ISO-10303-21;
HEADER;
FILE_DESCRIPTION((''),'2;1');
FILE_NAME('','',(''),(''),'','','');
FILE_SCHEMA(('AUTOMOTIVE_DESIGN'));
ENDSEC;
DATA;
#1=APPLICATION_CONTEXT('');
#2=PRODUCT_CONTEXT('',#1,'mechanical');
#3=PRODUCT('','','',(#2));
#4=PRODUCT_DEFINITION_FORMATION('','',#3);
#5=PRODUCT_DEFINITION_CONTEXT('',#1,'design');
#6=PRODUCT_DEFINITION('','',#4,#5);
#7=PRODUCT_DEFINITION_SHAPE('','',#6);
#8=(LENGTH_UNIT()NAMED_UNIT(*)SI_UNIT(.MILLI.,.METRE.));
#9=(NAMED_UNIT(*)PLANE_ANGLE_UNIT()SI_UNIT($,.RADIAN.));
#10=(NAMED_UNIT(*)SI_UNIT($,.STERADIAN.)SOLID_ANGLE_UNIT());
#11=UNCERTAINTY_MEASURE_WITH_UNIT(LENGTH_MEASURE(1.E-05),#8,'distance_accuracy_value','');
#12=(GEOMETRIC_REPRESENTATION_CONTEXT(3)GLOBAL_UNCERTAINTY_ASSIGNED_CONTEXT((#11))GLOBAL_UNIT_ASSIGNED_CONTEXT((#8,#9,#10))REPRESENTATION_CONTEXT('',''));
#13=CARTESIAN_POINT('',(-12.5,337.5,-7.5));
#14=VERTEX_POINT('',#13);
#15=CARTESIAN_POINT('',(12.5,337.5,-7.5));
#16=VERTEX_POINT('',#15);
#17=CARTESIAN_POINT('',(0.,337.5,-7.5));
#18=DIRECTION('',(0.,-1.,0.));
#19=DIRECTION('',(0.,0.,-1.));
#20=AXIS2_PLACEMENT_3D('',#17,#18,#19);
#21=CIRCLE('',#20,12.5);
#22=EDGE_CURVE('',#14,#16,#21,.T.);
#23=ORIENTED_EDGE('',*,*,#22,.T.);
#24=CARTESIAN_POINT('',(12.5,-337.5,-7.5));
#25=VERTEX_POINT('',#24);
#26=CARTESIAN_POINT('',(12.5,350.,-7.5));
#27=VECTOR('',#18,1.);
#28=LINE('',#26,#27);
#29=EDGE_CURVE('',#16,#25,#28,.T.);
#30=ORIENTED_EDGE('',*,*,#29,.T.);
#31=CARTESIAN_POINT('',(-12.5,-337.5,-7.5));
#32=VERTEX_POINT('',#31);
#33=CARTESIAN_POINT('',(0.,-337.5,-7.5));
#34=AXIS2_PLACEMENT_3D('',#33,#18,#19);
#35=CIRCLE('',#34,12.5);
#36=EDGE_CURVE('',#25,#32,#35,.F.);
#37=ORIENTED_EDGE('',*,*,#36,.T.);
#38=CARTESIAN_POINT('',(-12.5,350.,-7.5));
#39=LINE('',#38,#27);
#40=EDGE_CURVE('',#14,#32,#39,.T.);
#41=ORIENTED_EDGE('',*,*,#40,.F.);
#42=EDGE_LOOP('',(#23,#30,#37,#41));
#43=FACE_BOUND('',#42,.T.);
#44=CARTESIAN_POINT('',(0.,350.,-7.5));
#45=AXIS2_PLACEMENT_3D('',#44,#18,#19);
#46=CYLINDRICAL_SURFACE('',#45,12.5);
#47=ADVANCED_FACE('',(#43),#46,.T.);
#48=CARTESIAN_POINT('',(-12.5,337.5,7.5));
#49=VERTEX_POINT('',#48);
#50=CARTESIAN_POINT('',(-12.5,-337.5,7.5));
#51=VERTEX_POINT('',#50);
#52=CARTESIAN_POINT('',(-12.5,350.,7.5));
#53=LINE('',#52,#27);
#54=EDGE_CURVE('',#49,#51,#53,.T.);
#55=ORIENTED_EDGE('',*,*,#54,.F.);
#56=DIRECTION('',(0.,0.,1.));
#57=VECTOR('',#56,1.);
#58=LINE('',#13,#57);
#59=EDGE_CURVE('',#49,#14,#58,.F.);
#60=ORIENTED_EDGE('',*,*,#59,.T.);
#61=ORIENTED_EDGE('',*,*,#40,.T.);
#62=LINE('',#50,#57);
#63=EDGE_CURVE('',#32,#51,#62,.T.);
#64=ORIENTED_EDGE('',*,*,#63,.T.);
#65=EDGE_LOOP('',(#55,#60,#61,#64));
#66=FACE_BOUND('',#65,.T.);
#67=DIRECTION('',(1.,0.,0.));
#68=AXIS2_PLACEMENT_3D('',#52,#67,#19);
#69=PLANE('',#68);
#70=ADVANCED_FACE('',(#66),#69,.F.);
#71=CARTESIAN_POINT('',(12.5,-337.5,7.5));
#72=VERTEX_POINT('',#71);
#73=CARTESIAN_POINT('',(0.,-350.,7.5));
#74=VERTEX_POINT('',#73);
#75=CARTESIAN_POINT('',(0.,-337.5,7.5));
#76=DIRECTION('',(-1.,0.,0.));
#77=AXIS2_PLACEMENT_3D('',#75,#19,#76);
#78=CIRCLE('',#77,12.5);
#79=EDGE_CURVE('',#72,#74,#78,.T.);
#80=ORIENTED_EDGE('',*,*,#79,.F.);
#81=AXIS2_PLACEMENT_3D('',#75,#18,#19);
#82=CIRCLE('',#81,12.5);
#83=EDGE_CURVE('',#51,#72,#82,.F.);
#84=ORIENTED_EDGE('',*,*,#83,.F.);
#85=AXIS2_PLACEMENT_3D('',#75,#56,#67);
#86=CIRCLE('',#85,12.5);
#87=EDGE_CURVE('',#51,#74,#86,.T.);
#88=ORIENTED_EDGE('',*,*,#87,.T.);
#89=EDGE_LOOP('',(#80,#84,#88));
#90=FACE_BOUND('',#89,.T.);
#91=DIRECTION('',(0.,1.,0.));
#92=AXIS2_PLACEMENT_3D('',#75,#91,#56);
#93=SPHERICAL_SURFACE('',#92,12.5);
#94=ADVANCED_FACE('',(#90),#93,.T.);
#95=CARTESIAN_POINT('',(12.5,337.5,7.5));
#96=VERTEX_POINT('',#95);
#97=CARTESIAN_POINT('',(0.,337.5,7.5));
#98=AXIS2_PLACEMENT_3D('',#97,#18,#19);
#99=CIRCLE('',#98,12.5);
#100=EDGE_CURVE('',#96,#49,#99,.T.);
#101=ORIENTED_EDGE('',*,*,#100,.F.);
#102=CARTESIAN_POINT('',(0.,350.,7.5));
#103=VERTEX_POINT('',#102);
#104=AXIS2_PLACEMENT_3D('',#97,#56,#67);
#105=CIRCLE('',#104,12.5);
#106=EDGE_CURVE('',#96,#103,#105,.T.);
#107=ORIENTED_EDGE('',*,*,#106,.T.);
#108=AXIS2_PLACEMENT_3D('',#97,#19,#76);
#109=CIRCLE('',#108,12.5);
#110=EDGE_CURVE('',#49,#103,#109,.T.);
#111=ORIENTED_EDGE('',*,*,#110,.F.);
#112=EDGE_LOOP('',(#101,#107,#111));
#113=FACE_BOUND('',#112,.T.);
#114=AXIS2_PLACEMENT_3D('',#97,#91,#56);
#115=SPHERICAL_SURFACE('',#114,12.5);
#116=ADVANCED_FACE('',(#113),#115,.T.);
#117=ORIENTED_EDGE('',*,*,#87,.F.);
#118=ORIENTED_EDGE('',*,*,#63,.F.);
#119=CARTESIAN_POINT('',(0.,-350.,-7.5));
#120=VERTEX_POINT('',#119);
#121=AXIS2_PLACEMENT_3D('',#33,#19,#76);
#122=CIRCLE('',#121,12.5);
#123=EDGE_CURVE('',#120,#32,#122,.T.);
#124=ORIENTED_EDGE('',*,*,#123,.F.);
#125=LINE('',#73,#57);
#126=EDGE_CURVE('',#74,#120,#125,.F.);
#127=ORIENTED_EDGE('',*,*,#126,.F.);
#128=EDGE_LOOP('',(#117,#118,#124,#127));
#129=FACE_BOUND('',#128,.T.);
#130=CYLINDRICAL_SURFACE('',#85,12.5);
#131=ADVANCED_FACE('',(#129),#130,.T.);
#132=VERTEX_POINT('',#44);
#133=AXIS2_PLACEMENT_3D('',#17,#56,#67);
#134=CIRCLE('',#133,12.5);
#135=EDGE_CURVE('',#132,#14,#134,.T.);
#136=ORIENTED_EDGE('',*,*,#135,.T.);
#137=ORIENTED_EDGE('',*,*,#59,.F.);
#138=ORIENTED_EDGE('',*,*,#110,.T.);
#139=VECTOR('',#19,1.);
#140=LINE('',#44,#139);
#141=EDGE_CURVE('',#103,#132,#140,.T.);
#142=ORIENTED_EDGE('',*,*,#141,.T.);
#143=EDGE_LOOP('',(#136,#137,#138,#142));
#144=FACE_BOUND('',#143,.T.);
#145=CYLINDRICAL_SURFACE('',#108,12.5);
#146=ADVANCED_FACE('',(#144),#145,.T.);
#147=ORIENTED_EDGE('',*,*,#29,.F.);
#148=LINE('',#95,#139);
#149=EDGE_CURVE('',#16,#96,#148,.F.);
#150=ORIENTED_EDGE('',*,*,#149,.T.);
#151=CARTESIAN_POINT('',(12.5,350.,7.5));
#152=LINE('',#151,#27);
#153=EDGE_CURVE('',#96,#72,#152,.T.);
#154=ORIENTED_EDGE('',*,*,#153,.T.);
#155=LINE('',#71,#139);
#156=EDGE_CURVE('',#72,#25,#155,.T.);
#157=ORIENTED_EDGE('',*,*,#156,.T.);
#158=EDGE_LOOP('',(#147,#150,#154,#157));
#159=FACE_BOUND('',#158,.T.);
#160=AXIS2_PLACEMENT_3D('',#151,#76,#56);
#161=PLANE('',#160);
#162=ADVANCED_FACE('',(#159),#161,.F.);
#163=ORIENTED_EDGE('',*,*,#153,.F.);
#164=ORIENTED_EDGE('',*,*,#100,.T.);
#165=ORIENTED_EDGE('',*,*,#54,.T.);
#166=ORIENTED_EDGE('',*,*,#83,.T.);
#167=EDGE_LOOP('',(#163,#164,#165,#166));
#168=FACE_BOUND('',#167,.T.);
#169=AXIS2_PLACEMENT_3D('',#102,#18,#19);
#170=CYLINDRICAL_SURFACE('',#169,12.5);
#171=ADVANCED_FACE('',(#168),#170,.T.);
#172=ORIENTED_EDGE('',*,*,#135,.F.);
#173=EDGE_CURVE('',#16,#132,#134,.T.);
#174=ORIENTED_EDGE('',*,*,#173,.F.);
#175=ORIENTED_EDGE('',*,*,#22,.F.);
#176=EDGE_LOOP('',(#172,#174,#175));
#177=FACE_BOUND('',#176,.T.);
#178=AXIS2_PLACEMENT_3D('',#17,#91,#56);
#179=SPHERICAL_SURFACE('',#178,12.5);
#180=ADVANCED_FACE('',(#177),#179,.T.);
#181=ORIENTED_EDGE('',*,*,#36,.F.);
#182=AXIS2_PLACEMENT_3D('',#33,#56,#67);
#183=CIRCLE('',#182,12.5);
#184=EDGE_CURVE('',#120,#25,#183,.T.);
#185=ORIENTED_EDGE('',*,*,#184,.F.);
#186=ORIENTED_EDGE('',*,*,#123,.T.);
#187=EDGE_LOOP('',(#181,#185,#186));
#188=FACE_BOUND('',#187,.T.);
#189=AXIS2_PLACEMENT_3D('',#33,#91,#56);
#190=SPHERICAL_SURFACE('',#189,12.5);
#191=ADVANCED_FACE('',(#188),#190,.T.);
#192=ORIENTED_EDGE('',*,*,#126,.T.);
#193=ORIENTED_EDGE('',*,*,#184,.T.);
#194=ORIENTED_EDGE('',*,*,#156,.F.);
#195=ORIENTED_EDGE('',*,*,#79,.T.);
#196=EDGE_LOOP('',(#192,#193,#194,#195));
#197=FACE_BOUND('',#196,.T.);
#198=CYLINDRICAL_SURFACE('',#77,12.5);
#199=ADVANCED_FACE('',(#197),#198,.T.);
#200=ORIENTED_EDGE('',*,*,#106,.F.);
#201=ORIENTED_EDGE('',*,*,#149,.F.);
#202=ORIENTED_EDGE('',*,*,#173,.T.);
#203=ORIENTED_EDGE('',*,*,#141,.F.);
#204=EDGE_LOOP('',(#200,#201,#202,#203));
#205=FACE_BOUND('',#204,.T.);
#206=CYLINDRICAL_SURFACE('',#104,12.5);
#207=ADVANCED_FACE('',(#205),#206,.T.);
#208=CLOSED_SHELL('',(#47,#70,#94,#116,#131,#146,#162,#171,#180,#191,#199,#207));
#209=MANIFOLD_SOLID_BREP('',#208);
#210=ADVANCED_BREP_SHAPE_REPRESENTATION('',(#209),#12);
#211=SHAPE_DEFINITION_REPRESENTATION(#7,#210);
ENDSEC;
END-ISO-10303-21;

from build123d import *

# Parameters (mm, degrees)
BOSS_EXTRUDE1_DEPTH = 350
FILLET1_R           = 12.5


with BuildPart() as part:
    # Sketch2 → Boss-Extrude1 (new, symmetric)
    with BuildSketch(Plane(origin=(0, 0, 0), x_dir=(-1, 0, 0), z_dir=(0, 1, 0))):
        with BuildLine():
            Line((12.5, 7.5), (12.5, -7.5))
            ThreePointArc((12.5, -7.5), (0, -20), (-12.5, -7.5))
            Line((-12.5, -7.5), (-12.5, 7.5))
            ThreePointArc((-12.5, 7.5), (0, 20), (12.5, 7.5))
        make_face()
    extrude(amount=BOSS_EXTRUDE1_DEPTH, both=True)

    # Fillet1
    fillet1_edges = [part.edges().sort_by_distance(p)[0] for p in [
        (0, 350, -20),
        (-12.5, 350, 0),
        (0, 350, 20),
        (-12.5, -350, 0),
        (0, -350, -20),
        (12.5, -350, 0),
        (0, -350, 20),
        (12.5, 350, 0),
    ]]
    fillet(fillet1_edges, radius=FILLET1_R - 0.0001)  # a hair under: the kernel refuses the full size


solid = part.part
